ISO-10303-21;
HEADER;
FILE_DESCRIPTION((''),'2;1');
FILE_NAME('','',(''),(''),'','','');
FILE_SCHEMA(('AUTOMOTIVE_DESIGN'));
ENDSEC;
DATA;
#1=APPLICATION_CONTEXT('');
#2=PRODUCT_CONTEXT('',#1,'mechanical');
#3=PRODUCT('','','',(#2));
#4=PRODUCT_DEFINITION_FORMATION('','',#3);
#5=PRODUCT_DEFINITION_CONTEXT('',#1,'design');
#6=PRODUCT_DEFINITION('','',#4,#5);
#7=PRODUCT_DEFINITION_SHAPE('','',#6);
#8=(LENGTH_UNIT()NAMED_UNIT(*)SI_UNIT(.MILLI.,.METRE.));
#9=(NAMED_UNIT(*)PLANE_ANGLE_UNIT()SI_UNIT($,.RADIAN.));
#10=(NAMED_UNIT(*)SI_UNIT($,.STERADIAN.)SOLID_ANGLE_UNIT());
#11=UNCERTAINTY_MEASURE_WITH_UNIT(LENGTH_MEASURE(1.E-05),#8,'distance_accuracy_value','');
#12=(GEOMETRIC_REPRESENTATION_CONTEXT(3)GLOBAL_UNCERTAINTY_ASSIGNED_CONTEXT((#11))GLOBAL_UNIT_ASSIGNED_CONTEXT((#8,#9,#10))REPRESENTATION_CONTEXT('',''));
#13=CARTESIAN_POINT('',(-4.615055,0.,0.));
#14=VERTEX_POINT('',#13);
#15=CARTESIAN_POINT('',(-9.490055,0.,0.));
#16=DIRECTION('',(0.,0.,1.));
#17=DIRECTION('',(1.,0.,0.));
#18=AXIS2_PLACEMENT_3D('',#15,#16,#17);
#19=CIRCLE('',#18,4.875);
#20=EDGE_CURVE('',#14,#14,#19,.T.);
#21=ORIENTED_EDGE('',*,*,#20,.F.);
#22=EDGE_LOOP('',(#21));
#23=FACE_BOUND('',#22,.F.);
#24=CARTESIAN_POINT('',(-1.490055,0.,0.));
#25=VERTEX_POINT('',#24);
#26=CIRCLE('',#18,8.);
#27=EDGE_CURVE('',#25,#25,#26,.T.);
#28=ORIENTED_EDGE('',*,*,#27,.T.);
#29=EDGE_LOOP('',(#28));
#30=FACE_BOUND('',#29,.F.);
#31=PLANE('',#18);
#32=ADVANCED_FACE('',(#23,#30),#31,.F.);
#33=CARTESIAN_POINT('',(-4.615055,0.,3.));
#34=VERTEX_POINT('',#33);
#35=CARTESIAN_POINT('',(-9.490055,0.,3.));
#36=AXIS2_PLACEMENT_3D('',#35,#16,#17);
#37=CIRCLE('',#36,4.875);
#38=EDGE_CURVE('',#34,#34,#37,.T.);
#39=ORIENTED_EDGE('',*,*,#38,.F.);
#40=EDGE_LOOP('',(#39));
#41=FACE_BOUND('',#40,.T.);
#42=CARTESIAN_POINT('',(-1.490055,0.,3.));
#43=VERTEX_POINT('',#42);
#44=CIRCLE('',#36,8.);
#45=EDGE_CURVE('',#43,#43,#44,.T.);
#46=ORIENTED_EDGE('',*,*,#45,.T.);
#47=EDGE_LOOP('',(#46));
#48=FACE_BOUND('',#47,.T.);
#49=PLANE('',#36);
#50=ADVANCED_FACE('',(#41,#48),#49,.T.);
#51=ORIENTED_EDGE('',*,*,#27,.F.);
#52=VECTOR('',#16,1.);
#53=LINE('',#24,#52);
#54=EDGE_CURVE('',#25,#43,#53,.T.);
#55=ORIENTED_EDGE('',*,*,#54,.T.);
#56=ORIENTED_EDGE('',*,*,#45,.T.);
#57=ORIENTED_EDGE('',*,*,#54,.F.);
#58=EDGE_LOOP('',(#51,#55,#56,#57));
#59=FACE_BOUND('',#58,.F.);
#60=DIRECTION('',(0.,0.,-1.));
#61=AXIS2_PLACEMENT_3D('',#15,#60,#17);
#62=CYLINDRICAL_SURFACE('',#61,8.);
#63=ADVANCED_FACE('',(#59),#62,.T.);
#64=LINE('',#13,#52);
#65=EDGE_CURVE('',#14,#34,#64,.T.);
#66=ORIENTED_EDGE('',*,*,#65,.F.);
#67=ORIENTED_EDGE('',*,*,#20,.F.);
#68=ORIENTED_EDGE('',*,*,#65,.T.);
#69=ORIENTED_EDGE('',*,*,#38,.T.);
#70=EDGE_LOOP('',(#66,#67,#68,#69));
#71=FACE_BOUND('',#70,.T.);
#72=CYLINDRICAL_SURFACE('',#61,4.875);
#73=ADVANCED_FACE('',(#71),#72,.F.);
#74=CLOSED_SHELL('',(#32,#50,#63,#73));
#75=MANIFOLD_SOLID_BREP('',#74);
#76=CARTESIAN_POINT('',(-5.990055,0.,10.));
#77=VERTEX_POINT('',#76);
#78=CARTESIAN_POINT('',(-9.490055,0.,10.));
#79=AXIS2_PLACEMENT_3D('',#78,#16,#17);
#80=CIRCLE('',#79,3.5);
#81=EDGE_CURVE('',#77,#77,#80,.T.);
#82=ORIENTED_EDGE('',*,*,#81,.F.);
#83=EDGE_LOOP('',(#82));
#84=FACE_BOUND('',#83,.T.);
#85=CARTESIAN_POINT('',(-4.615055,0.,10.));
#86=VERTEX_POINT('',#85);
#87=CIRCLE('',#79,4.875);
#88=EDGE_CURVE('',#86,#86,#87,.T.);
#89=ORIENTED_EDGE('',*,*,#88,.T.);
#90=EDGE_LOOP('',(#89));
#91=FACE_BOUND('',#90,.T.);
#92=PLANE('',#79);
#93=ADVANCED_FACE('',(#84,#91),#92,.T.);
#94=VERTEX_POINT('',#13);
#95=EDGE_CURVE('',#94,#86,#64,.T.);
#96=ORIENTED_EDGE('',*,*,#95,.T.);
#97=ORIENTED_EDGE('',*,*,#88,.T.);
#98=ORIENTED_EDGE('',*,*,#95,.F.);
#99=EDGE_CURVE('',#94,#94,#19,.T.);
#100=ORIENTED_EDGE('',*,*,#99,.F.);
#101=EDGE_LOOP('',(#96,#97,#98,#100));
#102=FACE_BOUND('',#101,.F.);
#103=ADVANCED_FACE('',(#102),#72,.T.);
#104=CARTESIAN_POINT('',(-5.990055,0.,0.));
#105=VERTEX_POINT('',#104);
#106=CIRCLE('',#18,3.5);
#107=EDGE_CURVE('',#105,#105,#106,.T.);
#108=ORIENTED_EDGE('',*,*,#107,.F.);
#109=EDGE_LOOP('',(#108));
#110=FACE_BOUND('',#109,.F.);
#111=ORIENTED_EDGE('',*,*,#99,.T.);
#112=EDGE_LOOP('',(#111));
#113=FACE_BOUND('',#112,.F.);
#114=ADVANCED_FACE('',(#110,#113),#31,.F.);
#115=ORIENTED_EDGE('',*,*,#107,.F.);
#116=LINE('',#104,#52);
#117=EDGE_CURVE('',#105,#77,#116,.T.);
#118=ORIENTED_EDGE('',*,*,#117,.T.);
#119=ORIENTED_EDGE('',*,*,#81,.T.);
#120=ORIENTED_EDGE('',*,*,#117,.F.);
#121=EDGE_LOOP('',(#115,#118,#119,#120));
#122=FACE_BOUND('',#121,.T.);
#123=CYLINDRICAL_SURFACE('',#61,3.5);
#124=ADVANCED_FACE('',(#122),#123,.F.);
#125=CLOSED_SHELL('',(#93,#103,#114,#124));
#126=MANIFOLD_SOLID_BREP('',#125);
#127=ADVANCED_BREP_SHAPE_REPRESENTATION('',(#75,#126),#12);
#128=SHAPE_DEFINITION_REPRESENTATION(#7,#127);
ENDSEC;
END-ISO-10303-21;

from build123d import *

# Parameters (mm, degrees)
F0_R     = 8
F0_R_2   = 4.875
F1_DEPTH = 3
F0_R_3   = 3.5
F2_DEPTH = 10


# Not quite as in the source:
# - a feature names something its author has since deleted; it is built from what else it names


with BuildPart() as f1:
    # F0 (on Top) → F1 (new body)
    with BuildSketch(Plane.XY):
        with Locations((-9.4900550321, 0)):
            Circle(F0_R)
        with Locations((-9.4900550321, 0)):
            Circle(F0_R_2, mode=Mode.SUBTRACT)
    extrude(amount=F1_DEPTH)


with BuildPart() as f2:
    # F0 (on Top) → F2 (new body)
    with BuildSketch(Plane.XY):
        with Locations((-9.4900550321, 0)):
            Circle(F0_R_2)
        with Locations((-9.4900550321, 0)):
            Circle(F0_R_3, mode=Mode.SUBTRACT)
    extrude(amount=F2_DEPTH)


solid = Compound([f1.part, f2.part])
